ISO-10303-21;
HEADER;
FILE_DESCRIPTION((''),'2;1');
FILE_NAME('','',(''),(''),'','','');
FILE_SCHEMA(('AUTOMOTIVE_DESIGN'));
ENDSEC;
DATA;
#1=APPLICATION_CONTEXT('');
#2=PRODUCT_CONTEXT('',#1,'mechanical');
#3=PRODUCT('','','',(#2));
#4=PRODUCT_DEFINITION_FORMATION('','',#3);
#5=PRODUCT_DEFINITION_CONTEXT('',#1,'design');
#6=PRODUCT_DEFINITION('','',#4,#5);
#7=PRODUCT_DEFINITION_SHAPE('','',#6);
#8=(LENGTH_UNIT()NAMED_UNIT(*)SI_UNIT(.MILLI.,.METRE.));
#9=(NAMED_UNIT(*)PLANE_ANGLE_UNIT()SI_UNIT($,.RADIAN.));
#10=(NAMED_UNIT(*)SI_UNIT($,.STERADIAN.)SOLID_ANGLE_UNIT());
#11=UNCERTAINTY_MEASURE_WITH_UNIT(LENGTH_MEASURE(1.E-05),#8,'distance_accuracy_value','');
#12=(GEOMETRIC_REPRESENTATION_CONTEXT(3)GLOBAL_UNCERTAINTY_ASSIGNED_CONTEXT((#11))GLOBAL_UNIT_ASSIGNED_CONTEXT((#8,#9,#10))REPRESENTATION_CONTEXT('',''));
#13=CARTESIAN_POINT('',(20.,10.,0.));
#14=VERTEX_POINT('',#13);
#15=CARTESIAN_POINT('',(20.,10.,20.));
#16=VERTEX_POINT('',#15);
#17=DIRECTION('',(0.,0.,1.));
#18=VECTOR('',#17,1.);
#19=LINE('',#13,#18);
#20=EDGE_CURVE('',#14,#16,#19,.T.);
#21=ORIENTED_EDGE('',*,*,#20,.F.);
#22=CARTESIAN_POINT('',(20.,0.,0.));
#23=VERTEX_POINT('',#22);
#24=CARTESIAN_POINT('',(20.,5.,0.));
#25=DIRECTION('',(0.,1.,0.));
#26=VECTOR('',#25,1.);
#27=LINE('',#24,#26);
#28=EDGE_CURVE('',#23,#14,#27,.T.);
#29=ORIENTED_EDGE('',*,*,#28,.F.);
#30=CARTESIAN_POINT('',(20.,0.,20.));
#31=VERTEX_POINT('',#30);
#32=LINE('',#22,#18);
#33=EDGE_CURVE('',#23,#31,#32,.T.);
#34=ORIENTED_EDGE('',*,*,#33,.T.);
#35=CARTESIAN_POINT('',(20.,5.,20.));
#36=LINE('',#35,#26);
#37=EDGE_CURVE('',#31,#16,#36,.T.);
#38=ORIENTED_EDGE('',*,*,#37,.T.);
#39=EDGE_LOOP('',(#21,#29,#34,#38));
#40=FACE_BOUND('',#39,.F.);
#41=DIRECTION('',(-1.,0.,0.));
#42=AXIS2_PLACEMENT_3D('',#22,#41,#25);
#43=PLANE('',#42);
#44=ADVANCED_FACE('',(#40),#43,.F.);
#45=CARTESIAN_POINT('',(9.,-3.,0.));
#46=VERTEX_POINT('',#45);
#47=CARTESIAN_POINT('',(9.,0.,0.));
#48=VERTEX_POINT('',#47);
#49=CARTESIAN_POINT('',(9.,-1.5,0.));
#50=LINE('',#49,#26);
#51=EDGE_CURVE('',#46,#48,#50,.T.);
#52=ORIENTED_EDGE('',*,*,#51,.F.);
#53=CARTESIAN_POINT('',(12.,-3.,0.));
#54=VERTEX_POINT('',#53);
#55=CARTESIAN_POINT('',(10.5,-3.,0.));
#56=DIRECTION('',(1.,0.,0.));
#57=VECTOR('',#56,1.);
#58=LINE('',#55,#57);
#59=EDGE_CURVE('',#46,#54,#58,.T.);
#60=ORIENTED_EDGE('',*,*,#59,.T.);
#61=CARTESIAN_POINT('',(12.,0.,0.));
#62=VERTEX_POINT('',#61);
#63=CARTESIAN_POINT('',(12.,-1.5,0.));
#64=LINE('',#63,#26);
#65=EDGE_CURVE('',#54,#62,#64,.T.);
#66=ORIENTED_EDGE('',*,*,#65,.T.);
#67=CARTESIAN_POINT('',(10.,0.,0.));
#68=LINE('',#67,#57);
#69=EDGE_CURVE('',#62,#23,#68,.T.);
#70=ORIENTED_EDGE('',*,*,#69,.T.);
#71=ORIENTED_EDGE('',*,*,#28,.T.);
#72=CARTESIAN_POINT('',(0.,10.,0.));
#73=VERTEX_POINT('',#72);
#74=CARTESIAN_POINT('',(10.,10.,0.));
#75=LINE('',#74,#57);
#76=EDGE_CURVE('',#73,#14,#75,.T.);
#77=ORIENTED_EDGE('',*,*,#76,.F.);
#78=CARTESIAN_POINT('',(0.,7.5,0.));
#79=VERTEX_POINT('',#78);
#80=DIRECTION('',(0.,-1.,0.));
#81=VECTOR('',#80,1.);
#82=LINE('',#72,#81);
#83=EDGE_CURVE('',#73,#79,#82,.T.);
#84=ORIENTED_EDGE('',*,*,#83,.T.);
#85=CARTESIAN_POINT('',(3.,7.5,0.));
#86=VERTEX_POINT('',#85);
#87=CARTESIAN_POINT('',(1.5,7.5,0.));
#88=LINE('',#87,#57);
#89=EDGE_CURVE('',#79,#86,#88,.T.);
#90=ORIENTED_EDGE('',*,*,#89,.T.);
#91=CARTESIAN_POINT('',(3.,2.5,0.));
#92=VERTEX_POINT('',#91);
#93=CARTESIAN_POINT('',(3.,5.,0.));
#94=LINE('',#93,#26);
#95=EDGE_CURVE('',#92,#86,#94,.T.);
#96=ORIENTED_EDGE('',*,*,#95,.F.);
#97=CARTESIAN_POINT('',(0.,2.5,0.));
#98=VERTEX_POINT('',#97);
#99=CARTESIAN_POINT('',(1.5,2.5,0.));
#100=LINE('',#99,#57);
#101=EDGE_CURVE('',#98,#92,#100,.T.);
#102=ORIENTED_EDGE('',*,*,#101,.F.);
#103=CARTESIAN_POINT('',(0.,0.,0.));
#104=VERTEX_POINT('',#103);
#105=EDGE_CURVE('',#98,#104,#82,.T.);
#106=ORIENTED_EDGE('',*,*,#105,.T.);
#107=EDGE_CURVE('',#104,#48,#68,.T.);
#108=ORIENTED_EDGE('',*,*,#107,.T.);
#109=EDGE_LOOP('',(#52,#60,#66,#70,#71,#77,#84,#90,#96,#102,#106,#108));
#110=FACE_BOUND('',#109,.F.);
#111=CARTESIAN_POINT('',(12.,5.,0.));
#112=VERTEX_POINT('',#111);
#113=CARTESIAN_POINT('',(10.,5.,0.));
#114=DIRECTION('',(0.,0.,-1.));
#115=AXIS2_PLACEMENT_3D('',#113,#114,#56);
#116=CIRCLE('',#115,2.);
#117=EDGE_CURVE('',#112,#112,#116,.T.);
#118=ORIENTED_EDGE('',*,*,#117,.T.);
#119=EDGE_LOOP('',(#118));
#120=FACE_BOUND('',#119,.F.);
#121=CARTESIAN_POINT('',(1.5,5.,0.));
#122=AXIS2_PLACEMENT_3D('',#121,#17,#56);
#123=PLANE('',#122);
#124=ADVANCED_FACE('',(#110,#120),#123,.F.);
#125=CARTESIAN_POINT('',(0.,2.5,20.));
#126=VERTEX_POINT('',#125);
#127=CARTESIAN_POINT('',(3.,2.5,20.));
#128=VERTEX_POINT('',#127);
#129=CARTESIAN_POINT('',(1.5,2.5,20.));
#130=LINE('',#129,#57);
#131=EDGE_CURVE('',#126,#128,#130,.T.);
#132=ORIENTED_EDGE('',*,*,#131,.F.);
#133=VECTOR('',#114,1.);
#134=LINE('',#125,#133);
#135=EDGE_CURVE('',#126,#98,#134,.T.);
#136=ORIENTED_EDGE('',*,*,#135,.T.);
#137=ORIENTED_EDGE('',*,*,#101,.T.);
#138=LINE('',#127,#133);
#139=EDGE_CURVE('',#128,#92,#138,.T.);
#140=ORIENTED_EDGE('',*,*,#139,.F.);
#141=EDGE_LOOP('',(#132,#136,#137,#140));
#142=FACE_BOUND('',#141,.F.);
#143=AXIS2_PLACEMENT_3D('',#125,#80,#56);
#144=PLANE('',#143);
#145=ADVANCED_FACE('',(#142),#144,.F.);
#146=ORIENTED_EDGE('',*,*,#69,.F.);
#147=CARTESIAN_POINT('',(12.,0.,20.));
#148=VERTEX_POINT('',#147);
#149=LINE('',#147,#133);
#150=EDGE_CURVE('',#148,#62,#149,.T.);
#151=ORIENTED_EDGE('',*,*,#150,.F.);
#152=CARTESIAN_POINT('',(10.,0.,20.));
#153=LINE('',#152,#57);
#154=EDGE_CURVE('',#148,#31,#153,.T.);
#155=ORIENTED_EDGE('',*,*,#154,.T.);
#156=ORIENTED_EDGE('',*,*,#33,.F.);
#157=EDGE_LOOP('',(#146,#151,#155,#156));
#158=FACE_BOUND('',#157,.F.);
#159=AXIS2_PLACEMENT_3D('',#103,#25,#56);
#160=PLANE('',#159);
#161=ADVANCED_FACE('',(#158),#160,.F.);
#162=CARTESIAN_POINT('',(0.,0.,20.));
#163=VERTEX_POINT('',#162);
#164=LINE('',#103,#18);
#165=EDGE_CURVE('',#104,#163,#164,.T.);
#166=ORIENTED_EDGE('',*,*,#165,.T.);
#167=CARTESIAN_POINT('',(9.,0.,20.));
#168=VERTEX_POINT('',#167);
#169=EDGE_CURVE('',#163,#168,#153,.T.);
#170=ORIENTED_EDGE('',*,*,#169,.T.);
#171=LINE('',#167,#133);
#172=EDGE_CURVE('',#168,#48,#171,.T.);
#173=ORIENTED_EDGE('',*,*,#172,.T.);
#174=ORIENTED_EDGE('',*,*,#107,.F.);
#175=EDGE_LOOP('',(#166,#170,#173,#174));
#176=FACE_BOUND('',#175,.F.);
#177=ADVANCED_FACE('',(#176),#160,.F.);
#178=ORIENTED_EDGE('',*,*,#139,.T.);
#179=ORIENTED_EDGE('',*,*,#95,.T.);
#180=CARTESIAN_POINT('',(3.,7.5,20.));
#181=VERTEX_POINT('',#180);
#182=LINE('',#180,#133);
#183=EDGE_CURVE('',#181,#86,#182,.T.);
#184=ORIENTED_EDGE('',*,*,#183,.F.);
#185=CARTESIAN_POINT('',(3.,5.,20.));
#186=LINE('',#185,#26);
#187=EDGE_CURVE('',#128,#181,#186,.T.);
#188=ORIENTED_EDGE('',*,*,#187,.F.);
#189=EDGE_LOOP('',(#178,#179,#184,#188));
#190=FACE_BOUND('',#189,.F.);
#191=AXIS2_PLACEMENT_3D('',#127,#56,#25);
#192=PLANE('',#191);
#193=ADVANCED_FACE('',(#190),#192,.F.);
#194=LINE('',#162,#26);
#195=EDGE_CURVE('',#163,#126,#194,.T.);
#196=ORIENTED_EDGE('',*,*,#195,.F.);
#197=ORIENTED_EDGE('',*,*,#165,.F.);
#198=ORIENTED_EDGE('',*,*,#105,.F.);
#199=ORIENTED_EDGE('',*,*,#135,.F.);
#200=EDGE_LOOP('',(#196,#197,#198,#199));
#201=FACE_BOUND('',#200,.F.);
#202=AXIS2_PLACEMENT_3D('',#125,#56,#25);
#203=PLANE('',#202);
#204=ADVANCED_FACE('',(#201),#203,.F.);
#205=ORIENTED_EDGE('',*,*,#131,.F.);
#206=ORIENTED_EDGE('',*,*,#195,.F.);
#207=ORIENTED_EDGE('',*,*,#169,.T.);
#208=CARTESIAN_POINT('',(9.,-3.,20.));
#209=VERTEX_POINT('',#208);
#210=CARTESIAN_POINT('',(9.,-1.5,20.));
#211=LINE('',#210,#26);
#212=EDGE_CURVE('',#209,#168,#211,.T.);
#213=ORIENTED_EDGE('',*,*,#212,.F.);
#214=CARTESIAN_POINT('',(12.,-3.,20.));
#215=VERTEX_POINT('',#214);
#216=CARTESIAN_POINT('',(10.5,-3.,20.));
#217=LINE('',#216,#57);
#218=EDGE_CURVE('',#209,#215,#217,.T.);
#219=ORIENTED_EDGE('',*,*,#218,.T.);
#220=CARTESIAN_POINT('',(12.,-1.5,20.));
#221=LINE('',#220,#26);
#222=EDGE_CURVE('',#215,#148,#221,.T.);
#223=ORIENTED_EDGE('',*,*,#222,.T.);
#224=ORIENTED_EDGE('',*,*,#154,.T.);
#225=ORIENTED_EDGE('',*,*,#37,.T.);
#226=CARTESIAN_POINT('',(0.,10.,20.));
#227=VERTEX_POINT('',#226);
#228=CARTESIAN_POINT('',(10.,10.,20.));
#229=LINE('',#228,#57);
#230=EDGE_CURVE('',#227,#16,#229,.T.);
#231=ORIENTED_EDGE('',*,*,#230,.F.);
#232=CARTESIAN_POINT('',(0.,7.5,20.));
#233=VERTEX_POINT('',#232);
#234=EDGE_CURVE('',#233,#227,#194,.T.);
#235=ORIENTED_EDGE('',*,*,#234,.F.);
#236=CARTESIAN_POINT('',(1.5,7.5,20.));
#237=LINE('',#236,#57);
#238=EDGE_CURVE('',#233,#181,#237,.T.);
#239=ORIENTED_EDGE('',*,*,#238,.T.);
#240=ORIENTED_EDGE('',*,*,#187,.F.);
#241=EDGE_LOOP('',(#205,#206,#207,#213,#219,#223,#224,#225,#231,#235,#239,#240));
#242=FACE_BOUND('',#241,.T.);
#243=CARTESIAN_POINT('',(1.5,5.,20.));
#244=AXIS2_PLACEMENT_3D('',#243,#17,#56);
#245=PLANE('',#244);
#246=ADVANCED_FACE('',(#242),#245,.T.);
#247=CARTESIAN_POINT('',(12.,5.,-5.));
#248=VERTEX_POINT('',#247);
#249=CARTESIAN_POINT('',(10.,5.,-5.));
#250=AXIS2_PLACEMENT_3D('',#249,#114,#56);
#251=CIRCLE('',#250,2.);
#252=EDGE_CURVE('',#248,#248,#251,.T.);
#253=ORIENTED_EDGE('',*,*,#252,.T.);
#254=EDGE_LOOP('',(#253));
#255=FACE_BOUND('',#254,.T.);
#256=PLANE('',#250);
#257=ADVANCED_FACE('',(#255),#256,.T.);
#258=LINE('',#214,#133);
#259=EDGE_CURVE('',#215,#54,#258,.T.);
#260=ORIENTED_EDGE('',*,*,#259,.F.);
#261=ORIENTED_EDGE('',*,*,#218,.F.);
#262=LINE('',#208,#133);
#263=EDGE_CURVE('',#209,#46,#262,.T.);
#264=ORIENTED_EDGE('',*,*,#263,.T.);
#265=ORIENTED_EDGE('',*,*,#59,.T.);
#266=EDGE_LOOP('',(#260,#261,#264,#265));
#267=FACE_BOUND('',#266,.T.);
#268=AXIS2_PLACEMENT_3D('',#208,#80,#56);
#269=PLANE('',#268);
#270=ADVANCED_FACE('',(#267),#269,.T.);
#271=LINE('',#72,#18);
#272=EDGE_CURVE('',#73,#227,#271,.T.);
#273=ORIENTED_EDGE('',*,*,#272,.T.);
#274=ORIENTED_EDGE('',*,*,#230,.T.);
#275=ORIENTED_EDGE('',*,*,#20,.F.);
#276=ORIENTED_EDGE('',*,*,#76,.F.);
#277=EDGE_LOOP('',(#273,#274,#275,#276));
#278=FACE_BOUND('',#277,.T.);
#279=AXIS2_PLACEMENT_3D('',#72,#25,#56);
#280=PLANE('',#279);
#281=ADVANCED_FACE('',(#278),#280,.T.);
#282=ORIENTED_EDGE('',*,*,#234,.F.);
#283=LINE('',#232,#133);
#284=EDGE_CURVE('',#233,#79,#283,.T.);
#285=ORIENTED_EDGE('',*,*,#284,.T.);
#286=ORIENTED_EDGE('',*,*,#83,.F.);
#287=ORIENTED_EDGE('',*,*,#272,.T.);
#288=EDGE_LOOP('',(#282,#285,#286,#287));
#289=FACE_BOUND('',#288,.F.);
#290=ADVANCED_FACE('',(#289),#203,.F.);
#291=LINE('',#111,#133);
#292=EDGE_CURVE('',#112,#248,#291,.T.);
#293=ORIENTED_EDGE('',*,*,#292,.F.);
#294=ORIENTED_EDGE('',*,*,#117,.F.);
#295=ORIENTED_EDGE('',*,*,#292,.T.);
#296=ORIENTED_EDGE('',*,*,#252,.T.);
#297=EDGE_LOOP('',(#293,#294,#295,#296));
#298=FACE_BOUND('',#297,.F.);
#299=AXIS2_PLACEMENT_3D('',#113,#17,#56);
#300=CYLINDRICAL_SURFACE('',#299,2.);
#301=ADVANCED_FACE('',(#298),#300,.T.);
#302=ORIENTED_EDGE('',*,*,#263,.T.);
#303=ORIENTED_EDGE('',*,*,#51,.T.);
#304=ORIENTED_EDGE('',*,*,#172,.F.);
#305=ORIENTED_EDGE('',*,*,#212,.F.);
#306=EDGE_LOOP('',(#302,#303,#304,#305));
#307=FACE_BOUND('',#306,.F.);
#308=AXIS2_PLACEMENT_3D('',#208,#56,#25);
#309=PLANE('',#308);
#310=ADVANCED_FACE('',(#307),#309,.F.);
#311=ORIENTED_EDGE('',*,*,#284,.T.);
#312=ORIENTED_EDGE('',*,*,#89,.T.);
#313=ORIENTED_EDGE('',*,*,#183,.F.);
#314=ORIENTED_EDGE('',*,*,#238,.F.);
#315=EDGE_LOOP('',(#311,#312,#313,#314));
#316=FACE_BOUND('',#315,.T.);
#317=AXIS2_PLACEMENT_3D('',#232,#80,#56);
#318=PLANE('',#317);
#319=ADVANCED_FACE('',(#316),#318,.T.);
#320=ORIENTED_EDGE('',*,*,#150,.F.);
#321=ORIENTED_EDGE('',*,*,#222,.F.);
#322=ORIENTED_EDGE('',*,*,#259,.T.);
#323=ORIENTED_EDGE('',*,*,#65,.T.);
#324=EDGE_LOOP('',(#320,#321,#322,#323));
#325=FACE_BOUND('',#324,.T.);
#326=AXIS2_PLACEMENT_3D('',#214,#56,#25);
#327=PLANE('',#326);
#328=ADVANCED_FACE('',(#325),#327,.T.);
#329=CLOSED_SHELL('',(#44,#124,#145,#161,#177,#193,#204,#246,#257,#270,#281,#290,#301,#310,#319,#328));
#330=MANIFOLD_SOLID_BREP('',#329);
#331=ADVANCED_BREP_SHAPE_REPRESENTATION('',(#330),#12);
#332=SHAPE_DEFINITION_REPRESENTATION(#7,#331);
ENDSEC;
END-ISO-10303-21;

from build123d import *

# Parameters (mm, degrees)
F0_W     = 20
F0_H     = 10
F1_DEPTH = 20
F3_R     = 2
F4_DEPTH = 5
F5_DEPTH = 5
F2_W     = 3
F2_H     = 5
F6_DEPTH = 49
F2_H_2   = 3
F7_DEPTH = 20
F8_DEPTH = 20


# Not quite as in the source:
# - an extrude ends at something that could not be found from the text; its depth is read off the source's solid


with BuildPart() as f1:
    # F0 (on Top) → F1 (new body)
    with BuildSketch(Plane.XY):
        with Locations((10, 5)):
            Rectangle(F0_W, F0_H)
    extrude(amount=F1_DEPTH)

    # F3 (on face) → F4 (join)
    with BuildSketch(Plane(origin=(0, 0, 0), x_dir=(1, 0, 0), z_dir=(0, 0, -1))):
        with Locations((10, -5)):
            Circle(F3_R)
    extrude(amount=F4_DEPTH)

    # F3 (on face) → F5 (join)
    with BuildSketch(Plane(origin=(0, 0, 0), x_dir=(1, 0, 0), z_dir=(0, 0, -1))):
        with Locations((10, -5)):
            Circle(F3_R)
    extrude(amount=F5_DEPTH)

    # F2 (on face) → F6 (cut, through all)
    with BuildSketch(Plane.XY.offset(20)):
        with Locations((1.5, 5)):
            Rectangle(F2_W, F2_H)
    extrude(amount=-F6_DEPTH, mode=Mode.SUBTRACT)

    # F2 (on face) → F7 (join, through all)
    with BuildSketch(Plane.XY.offset(20)):
        with Locations((1.5, 5)):
            Rectangle(F2_W, F2_H)
        with Locations((10.5, -1.5)):
            Rectangle(F2_W, F2_H_2)
    extrude(amount=-F7_DEPTH)

    # F2 (on face) → F8 (cut, through all)
    with BuildSketch(Plane.XY.offset(20)):
        with Locations((1.5, 5)):
            Rectangle(F2_W, F2_H)
    extrude(amount=-F8_DEPTH, mode=Mode.SUBTRACT)


solid = f1.part
